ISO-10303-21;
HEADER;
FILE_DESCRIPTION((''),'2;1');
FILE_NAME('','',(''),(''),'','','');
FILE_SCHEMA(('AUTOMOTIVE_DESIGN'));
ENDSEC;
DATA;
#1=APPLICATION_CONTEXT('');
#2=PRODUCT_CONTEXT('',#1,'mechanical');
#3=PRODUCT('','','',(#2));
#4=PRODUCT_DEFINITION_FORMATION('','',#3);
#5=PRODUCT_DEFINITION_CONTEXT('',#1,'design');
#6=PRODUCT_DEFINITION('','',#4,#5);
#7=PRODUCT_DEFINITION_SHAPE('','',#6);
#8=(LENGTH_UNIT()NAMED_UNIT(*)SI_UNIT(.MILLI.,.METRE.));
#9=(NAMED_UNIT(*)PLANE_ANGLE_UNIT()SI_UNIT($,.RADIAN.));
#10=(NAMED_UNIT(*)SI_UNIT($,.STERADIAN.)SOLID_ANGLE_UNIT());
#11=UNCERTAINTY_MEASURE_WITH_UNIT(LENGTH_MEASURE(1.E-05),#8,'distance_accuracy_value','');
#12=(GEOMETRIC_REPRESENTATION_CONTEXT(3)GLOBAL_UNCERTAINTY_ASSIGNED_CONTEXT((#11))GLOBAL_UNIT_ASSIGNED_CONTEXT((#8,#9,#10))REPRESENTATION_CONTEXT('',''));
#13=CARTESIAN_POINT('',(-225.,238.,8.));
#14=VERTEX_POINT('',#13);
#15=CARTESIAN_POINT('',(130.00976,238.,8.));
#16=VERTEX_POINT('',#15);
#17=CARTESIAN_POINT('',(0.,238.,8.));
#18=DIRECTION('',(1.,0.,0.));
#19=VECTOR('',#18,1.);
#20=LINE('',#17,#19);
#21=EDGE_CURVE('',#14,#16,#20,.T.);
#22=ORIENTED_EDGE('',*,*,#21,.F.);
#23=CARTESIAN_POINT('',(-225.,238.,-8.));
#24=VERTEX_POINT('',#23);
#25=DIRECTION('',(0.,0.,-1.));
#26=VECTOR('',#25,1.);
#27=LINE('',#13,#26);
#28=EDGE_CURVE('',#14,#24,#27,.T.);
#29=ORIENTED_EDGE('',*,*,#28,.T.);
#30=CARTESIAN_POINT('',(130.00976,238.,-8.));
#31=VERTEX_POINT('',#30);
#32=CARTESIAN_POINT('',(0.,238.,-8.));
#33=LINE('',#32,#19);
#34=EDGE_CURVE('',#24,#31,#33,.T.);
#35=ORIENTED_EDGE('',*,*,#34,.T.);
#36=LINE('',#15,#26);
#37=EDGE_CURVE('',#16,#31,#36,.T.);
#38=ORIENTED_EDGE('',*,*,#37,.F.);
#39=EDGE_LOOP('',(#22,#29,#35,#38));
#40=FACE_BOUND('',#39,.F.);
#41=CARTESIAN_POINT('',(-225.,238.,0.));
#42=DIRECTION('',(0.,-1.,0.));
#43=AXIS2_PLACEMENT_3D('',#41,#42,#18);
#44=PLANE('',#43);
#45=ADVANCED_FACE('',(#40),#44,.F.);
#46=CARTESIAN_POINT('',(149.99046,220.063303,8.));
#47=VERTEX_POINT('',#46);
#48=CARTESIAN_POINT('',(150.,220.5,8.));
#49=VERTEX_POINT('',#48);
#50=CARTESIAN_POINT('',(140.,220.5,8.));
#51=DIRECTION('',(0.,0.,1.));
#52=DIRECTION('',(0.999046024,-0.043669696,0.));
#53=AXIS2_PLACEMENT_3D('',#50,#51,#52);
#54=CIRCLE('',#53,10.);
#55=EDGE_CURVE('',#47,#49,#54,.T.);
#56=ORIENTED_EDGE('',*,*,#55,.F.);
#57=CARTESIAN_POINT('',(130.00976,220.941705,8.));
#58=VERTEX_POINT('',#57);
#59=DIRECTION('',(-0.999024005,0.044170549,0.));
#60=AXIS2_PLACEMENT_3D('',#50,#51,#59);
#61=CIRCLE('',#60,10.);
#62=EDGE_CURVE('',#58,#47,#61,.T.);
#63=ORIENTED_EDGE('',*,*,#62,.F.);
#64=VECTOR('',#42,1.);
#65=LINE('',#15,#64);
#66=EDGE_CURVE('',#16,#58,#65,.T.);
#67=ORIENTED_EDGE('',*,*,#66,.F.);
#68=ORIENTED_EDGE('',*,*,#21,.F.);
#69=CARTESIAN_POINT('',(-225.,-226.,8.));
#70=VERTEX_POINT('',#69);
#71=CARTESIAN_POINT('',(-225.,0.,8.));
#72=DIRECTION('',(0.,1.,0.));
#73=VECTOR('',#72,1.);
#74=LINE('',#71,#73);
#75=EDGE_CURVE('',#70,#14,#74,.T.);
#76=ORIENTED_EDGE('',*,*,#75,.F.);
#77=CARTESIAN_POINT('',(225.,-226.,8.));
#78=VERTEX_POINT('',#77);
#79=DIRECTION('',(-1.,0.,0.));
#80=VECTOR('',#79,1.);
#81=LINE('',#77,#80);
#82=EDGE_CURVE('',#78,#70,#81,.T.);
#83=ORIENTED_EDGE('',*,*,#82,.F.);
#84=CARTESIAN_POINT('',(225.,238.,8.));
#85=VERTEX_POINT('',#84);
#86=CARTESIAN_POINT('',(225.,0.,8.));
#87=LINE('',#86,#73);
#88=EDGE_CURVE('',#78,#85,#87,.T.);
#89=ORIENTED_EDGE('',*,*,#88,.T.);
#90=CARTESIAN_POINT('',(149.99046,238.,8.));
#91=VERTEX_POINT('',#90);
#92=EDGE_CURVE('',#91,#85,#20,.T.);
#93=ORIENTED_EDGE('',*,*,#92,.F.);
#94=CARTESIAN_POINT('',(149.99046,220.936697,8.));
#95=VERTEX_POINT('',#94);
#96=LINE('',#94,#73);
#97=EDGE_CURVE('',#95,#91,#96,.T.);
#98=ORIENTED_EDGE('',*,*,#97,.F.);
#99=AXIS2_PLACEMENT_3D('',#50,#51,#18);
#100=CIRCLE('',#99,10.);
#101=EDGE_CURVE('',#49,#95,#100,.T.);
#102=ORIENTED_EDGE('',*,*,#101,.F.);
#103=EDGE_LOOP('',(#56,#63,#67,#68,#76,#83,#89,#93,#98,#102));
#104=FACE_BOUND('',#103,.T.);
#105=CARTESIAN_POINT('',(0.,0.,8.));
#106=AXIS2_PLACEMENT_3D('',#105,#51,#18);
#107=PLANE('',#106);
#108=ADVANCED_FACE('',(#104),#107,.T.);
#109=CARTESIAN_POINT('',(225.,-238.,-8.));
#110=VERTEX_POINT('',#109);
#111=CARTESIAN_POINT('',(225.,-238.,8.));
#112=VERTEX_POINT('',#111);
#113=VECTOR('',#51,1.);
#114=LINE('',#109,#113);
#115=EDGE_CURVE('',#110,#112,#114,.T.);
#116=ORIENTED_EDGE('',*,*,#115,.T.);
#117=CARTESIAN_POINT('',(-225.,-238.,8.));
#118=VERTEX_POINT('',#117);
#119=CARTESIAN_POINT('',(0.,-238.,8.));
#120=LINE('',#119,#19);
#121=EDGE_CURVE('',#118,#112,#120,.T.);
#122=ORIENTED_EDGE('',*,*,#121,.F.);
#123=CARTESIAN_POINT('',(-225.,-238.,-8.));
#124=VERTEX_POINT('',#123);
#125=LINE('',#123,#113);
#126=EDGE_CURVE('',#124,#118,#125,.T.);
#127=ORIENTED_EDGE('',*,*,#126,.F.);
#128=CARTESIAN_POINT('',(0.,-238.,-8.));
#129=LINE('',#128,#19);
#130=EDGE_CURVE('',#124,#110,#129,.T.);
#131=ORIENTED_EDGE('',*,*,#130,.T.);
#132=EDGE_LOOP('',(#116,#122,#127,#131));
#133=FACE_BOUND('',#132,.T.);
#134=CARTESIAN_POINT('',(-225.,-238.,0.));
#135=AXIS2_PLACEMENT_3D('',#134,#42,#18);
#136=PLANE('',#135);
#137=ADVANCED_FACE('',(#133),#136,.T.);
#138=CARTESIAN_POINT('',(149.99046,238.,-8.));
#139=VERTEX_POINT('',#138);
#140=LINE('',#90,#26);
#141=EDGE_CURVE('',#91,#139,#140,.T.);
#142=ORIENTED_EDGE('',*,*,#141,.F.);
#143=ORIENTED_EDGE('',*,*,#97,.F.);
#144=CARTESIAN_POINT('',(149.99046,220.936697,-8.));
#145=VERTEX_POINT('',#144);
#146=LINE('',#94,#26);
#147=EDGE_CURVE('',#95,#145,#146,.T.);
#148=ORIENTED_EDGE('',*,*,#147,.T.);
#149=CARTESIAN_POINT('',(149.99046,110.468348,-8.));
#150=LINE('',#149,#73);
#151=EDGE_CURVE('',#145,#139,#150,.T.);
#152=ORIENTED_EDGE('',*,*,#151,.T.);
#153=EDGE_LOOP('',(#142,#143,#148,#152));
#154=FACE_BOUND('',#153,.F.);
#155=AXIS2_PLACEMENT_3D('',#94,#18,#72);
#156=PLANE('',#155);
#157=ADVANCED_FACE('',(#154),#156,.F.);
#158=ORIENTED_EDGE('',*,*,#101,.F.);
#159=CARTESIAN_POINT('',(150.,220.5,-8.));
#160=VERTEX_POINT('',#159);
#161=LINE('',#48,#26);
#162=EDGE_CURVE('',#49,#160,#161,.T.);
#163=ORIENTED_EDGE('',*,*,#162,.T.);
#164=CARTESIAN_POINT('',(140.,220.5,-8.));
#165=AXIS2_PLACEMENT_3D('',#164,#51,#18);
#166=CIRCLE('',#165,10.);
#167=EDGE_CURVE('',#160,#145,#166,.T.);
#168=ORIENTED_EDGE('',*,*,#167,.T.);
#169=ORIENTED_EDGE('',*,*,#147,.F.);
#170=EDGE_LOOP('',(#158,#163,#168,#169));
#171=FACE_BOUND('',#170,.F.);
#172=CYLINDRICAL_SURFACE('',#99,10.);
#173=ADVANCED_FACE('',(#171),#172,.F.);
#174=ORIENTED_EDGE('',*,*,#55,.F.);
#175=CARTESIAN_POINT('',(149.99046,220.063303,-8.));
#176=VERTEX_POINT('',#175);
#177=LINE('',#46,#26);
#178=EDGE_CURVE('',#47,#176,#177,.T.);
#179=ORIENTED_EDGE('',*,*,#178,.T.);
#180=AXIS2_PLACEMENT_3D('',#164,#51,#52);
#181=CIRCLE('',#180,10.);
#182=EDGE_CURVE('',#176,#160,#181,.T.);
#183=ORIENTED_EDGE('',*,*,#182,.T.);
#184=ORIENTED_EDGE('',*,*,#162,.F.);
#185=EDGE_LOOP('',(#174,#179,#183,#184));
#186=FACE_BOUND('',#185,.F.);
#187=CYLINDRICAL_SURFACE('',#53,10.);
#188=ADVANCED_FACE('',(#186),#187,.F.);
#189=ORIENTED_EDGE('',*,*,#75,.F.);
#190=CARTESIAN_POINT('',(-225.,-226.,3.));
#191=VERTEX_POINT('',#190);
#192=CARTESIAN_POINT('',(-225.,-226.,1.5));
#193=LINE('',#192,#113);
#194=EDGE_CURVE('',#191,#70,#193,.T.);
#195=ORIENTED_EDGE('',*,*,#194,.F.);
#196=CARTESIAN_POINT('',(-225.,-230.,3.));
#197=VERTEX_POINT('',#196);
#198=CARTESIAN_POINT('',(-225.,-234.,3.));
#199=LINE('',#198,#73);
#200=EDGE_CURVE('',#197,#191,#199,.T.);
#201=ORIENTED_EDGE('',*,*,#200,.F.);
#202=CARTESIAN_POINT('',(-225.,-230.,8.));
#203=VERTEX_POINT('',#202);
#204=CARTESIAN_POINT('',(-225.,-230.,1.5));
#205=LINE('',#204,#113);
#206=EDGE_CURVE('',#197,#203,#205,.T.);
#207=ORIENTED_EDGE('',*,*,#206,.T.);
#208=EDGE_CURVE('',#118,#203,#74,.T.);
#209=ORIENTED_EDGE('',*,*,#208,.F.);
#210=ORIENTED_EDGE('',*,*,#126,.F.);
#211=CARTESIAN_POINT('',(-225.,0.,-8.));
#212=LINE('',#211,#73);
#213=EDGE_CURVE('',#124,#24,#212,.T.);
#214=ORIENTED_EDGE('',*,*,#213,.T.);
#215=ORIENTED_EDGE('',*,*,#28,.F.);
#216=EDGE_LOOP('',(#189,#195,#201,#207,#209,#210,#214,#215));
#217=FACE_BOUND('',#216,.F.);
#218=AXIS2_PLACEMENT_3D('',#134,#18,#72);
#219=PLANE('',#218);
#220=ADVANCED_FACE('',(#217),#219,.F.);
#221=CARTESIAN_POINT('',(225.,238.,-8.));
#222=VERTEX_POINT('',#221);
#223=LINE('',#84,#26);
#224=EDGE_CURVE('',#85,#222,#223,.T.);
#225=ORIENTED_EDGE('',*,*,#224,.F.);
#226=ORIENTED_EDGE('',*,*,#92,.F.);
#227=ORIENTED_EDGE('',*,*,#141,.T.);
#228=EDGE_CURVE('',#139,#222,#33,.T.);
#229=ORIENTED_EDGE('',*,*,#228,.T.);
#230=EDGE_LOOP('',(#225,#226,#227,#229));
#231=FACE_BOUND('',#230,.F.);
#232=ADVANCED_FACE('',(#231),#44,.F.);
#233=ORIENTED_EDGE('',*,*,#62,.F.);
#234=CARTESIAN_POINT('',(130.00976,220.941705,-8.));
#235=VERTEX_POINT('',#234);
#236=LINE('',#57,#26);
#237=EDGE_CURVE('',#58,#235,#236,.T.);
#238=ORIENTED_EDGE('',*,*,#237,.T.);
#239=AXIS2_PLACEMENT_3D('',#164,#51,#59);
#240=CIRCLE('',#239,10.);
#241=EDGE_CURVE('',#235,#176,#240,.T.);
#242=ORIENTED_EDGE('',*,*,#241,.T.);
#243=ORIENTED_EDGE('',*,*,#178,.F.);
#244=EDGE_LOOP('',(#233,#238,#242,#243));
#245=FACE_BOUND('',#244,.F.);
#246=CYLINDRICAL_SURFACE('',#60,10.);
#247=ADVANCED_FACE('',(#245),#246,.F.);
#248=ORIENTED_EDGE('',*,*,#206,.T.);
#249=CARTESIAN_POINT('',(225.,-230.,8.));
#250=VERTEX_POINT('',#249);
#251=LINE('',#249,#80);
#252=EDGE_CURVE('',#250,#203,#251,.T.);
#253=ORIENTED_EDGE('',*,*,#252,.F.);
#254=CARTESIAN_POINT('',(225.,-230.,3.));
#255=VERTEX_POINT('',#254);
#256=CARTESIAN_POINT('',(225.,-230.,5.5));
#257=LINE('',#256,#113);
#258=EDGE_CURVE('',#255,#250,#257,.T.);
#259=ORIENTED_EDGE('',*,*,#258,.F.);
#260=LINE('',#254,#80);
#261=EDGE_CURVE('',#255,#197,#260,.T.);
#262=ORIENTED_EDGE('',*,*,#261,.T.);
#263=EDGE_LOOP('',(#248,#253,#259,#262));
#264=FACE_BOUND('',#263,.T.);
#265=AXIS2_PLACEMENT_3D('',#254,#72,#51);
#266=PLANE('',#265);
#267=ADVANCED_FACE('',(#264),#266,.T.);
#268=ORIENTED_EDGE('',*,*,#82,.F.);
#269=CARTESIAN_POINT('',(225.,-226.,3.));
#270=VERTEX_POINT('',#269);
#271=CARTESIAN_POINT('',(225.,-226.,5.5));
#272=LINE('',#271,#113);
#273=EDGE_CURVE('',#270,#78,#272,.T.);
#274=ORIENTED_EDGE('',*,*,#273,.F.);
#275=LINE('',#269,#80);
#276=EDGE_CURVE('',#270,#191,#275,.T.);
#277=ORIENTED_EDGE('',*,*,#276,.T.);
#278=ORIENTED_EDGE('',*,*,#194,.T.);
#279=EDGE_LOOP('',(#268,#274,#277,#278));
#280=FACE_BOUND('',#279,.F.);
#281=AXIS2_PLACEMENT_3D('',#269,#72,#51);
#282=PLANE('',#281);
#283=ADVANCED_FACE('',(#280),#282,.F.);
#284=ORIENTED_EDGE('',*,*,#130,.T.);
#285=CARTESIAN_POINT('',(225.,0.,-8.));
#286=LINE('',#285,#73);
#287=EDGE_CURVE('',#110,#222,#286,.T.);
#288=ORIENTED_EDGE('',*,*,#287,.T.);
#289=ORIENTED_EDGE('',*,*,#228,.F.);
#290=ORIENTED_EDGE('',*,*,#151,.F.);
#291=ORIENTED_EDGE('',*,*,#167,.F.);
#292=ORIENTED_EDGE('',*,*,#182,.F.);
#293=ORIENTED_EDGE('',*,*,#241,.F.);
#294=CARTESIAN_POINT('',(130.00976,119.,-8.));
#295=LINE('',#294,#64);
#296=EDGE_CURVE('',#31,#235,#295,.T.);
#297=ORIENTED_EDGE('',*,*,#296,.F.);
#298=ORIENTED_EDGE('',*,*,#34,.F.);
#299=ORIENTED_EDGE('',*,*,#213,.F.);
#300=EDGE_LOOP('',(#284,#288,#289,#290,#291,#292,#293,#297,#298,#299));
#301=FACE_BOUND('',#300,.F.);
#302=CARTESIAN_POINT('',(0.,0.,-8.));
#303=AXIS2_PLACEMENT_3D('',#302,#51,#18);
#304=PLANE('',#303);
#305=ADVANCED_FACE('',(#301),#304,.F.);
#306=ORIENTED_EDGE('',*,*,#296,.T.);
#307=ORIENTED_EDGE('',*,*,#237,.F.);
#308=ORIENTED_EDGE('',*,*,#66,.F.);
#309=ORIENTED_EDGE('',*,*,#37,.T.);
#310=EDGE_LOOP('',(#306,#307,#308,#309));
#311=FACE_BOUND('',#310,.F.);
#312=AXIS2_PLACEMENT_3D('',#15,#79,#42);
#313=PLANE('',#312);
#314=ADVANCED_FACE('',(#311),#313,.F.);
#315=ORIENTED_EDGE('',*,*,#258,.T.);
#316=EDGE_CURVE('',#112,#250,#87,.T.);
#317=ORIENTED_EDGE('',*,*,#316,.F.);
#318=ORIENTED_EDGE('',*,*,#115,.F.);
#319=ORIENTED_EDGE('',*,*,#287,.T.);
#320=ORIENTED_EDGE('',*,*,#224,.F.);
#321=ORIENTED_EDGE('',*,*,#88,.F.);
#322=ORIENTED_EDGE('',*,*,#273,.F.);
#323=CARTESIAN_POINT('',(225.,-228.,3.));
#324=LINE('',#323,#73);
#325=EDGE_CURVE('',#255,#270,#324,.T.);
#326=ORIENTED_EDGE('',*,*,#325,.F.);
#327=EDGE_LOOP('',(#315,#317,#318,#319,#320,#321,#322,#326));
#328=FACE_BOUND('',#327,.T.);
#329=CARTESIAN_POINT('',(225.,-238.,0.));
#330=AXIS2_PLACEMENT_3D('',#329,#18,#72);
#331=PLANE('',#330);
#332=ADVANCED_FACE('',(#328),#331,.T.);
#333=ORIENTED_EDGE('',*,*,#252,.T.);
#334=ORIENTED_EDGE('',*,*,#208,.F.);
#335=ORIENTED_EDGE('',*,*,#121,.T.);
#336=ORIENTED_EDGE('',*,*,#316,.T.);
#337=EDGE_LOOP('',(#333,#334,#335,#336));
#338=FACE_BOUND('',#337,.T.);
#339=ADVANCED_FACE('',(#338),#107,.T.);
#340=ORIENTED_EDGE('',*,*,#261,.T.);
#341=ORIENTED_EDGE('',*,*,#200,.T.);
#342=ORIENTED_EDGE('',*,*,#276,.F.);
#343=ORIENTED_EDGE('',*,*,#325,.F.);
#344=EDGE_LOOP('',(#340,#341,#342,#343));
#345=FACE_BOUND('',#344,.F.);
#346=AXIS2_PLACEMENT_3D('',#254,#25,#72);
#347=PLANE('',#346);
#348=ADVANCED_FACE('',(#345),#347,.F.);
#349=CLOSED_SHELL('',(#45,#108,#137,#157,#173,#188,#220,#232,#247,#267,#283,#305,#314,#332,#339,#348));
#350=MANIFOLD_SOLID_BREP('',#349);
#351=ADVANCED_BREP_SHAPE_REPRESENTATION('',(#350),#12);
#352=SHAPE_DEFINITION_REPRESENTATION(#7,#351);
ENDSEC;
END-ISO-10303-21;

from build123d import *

# Parameters (mm, degrees)
F0_W     = 450
F0_H     = 476
F1_DEPTH = 8
F3_DEPTH = 16.001
F4_W     = 4
F4_H     = 5
F5_DEPTH = 450.001


# Not quite as in the source:
# - a feature names something its author has since deleted; it is built from what else it names


with BuildPart() as f1:
    # F0 (on Top) → F1 (new body, symmetric)
    with BuildSketch(Plane.XY):
        Rectangle(F0_W, F0_H)
    extrude(amount=F1_DEPTH, both=True)

    # F2 (on face) → F3 (cut, through all)
    with BuildSketch(Plane.XY.offset(8)):
        with BuildLine():
            ThreePointArc((149.9904602378, 220.9366969629), (140.0025066822, 230.4999996858), (130.0097599498, 220.9417054897))
            ThreePointArc((130.0097599498, 220.9417054897), (139.5607987599, 210.5096495421), (149.9904602378, 220.0633030371))
            Line((149.9904602378, 220.0633030371), (149.9904602378, 220.9366969629))
        make_face()
        with BuildLine():
            Line((149.9904602378, 220.9366969629), (149.9904602378, 220.0633030371))
            ThreePointArc((149.9904602378, 220.0633030371), (149.997614775, 220.2815994251), (150, 220.5))
            ThreePointArc((150, 220.5), (149.997614775, 220.7184005749), (149.9904602378, 220.9366969629))
        make_face()
        with BuildLine():
            Line((130.0097599498, 238), (130.0097599498, 220.9417054897))
            ThreePointArc((130.0097599498, 220.9417054897), (140.0025066822, 230.4999996858), (149.9904602378, 220.9366969629))
            Line((149.9904602378, 220.9366969629), (149.9904602378, 238))
            Line((149.9904602378, 238), (130.0097599498, 238))
        make_face()
    extrude(amount=-F3_DEPTH, mode=Mode.SUBTRACT)

    # F4 (on face) → F5 (cut, through all)
    with BuildSketch(Plane.YZ.offset(225)):
        with Locations((-228, 5.5)):
            Rectangle(F4_W, F4_H)
    extrude(amount=-F5_DEPTH, mode=Mode.SUBTRACT)


solid = f1.part
